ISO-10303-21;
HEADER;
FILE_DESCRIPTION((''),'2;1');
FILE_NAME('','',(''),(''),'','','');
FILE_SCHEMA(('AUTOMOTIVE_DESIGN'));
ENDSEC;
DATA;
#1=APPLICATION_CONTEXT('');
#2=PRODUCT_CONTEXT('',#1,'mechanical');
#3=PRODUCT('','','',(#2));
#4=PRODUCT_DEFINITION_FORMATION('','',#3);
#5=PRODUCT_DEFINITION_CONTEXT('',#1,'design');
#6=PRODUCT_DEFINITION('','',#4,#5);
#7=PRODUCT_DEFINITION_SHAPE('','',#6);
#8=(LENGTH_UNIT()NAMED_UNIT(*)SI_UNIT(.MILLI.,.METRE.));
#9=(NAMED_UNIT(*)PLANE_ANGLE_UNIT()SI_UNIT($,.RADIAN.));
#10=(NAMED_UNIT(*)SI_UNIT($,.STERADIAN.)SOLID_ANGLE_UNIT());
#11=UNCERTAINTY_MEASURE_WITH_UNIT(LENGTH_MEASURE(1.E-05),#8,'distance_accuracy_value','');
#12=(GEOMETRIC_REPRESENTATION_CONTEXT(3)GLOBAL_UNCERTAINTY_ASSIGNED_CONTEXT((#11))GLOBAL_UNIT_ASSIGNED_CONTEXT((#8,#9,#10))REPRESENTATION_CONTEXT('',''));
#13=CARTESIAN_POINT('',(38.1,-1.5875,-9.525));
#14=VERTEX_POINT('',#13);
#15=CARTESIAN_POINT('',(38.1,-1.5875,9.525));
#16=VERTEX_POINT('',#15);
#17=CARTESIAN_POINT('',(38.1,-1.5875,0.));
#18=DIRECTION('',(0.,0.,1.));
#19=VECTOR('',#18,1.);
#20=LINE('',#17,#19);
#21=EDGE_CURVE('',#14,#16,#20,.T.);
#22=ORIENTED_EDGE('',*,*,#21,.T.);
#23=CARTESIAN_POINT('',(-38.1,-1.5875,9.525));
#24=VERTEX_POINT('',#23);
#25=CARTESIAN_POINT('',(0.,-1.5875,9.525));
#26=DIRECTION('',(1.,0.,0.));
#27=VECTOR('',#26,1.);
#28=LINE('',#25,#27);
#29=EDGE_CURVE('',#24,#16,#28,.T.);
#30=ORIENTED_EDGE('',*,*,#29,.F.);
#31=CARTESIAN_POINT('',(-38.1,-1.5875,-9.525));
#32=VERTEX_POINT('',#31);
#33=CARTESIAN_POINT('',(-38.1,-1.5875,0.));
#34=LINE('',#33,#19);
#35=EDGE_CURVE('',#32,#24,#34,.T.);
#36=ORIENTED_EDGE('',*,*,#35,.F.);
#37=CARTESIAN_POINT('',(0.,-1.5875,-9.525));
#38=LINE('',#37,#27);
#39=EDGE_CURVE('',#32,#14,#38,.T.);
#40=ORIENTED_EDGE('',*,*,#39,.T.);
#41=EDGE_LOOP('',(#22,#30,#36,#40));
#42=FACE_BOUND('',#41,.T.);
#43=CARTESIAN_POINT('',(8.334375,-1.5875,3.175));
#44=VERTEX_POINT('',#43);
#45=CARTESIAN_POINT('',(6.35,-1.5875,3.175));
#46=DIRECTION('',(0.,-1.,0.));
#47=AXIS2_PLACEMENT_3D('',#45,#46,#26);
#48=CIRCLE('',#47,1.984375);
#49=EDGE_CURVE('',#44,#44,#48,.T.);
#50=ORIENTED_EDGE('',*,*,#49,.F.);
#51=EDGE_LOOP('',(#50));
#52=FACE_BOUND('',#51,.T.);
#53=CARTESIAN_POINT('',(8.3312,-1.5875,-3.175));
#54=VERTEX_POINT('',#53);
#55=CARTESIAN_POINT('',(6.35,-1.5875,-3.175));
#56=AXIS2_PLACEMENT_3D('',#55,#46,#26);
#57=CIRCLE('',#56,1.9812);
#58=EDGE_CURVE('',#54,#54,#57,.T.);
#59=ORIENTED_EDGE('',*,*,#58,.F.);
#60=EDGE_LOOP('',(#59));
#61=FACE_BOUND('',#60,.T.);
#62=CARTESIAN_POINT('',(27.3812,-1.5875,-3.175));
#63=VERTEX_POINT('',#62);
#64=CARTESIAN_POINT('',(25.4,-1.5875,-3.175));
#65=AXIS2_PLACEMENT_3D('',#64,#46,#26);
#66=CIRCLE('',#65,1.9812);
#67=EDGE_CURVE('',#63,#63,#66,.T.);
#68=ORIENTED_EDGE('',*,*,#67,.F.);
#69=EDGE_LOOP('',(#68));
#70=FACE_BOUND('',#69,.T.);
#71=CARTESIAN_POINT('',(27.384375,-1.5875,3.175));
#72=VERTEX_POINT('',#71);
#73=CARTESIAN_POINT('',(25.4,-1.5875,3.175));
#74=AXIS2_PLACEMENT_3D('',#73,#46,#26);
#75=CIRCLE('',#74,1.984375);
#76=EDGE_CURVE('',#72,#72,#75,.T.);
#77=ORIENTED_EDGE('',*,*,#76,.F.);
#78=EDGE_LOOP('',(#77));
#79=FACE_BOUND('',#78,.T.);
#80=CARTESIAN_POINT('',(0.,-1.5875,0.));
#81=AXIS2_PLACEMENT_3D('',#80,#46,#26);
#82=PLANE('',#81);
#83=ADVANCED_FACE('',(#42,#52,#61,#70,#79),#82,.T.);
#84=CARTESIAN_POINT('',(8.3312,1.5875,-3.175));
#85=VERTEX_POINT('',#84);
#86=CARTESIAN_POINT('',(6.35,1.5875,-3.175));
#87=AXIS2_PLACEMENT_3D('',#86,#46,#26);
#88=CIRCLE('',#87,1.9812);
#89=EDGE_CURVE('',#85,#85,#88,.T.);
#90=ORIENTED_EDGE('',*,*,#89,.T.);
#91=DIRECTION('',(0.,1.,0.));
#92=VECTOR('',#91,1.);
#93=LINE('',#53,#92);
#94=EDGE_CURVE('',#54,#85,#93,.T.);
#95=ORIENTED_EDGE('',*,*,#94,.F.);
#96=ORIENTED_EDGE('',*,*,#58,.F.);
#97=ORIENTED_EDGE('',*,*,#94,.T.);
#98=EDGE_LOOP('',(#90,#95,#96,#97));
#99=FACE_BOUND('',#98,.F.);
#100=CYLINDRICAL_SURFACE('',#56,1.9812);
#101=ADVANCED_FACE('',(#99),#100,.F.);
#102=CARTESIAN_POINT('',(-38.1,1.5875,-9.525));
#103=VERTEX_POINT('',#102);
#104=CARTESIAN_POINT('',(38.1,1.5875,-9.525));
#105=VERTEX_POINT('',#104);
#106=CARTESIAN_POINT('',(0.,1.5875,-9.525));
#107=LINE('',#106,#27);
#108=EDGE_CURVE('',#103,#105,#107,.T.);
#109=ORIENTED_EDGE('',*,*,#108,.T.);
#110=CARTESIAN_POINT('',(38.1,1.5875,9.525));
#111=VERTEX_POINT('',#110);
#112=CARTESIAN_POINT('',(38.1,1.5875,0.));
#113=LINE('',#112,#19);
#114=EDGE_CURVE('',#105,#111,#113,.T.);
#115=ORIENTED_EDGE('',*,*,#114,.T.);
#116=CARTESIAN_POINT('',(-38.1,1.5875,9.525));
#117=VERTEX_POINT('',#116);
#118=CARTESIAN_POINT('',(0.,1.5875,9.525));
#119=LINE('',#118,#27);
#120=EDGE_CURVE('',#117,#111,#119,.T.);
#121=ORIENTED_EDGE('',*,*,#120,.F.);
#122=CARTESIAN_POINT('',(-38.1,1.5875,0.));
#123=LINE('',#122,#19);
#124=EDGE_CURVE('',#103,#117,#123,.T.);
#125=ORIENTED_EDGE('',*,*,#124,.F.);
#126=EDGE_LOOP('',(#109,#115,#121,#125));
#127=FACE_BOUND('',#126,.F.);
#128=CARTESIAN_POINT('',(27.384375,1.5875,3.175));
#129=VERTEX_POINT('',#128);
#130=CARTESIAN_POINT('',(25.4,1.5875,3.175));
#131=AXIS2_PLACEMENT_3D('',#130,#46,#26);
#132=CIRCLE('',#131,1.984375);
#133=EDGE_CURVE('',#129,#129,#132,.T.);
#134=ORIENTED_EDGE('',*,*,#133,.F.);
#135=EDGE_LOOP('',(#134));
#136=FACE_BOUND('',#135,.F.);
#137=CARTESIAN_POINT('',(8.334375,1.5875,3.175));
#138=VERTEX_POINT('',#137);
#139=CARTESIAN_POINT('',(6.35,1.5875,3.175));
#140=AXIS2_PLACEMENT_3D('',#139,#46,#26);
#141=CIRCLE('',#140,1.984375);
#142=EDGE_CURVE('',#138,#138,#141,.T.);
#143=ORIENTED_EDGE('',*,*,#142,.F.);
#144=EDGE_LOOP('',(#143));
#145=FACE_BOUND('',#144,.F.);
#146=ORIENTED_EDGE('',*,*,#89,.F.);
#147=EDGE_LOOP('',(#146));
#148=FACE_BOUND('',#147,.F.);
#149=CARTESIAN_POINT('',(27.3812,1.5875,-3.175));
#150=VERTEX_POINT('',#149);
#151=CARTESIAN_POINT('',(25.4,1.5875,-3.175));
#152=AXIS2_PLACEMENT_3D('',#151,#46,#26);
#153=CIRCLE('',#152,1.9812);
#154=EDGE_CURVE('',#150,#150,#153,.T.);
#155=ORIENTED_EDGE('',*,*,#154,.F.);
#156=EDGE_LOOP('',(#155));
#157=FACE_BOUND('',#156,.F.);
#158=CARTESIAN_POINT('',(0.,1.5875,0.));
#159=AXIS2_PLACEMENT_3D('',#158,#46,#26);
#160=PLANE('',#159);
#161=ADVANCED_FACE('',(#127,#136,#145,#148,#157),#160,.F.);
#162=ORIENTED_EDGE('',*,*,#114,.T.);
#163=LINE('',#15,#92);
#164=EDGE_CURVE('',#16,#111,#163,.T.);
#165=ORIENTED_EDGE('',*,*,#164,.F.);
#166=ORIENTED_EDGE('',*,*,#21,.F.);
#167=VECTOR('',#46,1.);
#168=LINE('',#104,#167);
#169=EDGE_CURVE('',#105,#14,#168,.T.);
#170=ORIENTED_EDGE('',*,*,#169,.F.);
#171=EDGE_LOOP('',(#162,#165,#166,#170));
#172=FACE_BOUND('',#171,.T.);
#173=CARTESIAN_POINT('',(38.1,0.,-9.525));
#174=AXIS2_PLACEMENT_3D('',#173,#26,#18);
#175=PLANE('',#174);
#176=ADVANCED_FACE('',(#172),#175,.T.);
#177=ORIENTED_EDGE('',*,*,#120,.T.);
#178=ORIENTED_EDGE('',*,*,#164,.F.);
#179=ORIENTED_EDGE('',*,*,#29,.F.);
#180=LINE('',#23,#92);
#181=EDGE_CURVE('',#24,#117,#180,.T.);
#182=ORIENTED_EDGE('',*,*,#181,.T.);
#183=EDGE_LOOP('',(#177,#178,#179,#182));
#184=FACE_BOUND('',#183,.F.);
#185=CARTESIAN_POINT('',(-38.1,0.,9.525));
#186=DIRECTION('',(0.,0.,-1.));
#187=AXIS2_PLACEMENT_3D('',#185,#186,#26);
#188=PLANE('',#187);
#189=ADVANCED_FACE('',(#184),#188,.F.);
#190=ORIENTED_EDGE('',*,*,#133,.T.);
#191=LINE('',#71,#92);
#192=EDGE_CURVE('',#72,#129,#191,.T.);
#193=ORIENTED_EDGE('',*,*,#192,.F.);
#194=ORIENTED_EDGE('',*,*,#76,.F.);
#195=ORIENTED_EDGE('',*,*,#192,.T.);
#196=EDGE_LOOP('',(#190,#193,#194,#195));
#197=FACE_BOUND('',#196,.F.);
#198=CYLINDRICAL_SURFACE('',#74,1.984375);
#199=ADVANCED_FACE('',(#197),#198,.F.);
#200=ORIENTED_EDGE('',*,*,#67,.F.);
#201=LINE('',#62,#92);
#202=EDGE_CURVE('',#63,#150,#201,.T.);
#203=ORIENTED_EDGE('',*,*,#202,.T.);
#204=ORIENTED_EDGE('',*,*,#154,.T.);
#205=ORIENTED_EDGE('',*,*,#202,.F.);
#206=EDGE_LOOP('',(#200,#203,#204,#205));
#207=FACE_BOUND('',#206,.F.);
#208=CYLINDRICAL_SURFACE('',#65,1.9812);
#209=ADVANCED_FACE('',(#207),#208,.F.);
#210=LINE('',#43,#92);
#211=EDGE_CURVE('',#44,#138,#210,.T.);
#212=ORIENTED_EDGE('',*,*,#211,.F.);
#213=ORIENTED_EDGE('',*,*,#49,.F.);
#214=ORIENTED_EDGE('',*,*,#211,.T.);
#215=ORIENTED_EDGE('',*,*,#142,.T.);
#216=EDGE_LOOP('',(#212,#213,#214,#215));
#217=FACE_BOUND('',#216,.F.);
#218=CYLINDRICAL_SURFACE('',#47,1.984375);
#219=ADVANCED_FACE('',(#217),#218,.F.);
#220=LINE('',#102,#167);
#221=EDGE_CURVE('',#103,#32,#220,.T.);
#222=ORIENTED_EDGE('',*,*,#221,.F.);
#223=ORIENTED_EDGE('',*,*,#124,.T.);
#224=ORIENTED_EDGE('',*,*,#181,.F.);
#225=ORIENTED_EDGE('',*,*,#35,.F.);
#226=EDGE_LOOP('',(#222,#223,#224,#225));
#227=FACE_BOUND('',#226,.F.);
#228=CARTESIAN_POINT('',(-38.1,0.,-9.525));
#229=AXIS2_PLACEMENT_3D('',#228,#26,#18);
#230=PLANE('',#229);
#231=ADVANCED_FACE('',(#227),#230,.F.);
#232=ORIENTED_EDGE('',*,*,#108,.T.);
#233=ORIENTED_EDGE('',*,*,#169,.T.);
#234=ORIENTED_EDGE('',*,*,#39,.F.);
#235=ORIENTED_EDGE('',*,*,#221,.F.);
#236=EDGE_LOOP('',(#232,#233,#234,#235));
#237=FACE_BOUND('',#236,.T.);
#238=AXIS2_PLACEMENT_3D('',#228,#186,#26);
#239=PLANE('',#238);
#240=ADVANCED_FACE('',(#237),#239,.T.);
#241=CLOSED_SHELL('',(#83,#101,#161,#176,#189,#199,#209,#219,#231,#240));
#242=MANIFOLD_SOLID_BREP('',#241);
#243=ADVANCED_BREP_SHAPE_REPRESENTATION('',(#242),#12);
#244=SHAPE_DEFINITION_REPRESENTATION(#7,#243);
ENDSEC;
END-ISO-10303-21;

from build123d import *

# Parameters (mm, degrees)
F0_W     = 76.2
F0_H     = 19.05
F1_DEPTH = 1.5875
F2_R     = 1.984375
F2_R_2   = 1.9812
F3_DEPTH = 3.175
F4_DEPTH = 3.175


# Not quite as in the source:
# - a length typed as a fraction of an inch, garbled in the dataset ("3 / 203.2 mm" for 3/8 in), is restored


with BuildPart() as f1:
    # F0 (on Front) → F1 (new body, symmetric)
    with BuildSketch(Plane.XZ):
        Rectangle(F0_W, F0_H)
    extrude(amount=F1_DEPTH, both=True)

    # F2 (on face) → F3 (cut)
    with BuildSketch(Plane.XZ.offset(1.5875)):
        with Locations((6.35, 3.175)):
            Circle(F2_R)
        with Locations((6.35, -3.175)):
            Circle(F2_R_2)
        with Locations((25.4, 3.175)):
            Circle(F2_R)
        with Locations((25.4, -3.175)):
            Circle(F2_R_2)
    extrude(amount=-F3_DEPTH, mode=Mode.SUBTRACT)

    # F2 (on face) → F4 (cut)
    with BuildSketch(Plane.XZ.offset(1.5875)):
        with Locations((6.35, 3.175)):
            Circle(F2_R)
        with Locations((6.35, -3.175)):
            Circle(F2_R_2)
        with Locations((25.4, 3.175)):
            Circle(F2_R)
        with Locations((25.4, -3.175)):
            Circle(F2_R_2)
    extrude(amount=-F4_DEPTH, mode=Mode.SUBTRACT)


solid = f1.part
